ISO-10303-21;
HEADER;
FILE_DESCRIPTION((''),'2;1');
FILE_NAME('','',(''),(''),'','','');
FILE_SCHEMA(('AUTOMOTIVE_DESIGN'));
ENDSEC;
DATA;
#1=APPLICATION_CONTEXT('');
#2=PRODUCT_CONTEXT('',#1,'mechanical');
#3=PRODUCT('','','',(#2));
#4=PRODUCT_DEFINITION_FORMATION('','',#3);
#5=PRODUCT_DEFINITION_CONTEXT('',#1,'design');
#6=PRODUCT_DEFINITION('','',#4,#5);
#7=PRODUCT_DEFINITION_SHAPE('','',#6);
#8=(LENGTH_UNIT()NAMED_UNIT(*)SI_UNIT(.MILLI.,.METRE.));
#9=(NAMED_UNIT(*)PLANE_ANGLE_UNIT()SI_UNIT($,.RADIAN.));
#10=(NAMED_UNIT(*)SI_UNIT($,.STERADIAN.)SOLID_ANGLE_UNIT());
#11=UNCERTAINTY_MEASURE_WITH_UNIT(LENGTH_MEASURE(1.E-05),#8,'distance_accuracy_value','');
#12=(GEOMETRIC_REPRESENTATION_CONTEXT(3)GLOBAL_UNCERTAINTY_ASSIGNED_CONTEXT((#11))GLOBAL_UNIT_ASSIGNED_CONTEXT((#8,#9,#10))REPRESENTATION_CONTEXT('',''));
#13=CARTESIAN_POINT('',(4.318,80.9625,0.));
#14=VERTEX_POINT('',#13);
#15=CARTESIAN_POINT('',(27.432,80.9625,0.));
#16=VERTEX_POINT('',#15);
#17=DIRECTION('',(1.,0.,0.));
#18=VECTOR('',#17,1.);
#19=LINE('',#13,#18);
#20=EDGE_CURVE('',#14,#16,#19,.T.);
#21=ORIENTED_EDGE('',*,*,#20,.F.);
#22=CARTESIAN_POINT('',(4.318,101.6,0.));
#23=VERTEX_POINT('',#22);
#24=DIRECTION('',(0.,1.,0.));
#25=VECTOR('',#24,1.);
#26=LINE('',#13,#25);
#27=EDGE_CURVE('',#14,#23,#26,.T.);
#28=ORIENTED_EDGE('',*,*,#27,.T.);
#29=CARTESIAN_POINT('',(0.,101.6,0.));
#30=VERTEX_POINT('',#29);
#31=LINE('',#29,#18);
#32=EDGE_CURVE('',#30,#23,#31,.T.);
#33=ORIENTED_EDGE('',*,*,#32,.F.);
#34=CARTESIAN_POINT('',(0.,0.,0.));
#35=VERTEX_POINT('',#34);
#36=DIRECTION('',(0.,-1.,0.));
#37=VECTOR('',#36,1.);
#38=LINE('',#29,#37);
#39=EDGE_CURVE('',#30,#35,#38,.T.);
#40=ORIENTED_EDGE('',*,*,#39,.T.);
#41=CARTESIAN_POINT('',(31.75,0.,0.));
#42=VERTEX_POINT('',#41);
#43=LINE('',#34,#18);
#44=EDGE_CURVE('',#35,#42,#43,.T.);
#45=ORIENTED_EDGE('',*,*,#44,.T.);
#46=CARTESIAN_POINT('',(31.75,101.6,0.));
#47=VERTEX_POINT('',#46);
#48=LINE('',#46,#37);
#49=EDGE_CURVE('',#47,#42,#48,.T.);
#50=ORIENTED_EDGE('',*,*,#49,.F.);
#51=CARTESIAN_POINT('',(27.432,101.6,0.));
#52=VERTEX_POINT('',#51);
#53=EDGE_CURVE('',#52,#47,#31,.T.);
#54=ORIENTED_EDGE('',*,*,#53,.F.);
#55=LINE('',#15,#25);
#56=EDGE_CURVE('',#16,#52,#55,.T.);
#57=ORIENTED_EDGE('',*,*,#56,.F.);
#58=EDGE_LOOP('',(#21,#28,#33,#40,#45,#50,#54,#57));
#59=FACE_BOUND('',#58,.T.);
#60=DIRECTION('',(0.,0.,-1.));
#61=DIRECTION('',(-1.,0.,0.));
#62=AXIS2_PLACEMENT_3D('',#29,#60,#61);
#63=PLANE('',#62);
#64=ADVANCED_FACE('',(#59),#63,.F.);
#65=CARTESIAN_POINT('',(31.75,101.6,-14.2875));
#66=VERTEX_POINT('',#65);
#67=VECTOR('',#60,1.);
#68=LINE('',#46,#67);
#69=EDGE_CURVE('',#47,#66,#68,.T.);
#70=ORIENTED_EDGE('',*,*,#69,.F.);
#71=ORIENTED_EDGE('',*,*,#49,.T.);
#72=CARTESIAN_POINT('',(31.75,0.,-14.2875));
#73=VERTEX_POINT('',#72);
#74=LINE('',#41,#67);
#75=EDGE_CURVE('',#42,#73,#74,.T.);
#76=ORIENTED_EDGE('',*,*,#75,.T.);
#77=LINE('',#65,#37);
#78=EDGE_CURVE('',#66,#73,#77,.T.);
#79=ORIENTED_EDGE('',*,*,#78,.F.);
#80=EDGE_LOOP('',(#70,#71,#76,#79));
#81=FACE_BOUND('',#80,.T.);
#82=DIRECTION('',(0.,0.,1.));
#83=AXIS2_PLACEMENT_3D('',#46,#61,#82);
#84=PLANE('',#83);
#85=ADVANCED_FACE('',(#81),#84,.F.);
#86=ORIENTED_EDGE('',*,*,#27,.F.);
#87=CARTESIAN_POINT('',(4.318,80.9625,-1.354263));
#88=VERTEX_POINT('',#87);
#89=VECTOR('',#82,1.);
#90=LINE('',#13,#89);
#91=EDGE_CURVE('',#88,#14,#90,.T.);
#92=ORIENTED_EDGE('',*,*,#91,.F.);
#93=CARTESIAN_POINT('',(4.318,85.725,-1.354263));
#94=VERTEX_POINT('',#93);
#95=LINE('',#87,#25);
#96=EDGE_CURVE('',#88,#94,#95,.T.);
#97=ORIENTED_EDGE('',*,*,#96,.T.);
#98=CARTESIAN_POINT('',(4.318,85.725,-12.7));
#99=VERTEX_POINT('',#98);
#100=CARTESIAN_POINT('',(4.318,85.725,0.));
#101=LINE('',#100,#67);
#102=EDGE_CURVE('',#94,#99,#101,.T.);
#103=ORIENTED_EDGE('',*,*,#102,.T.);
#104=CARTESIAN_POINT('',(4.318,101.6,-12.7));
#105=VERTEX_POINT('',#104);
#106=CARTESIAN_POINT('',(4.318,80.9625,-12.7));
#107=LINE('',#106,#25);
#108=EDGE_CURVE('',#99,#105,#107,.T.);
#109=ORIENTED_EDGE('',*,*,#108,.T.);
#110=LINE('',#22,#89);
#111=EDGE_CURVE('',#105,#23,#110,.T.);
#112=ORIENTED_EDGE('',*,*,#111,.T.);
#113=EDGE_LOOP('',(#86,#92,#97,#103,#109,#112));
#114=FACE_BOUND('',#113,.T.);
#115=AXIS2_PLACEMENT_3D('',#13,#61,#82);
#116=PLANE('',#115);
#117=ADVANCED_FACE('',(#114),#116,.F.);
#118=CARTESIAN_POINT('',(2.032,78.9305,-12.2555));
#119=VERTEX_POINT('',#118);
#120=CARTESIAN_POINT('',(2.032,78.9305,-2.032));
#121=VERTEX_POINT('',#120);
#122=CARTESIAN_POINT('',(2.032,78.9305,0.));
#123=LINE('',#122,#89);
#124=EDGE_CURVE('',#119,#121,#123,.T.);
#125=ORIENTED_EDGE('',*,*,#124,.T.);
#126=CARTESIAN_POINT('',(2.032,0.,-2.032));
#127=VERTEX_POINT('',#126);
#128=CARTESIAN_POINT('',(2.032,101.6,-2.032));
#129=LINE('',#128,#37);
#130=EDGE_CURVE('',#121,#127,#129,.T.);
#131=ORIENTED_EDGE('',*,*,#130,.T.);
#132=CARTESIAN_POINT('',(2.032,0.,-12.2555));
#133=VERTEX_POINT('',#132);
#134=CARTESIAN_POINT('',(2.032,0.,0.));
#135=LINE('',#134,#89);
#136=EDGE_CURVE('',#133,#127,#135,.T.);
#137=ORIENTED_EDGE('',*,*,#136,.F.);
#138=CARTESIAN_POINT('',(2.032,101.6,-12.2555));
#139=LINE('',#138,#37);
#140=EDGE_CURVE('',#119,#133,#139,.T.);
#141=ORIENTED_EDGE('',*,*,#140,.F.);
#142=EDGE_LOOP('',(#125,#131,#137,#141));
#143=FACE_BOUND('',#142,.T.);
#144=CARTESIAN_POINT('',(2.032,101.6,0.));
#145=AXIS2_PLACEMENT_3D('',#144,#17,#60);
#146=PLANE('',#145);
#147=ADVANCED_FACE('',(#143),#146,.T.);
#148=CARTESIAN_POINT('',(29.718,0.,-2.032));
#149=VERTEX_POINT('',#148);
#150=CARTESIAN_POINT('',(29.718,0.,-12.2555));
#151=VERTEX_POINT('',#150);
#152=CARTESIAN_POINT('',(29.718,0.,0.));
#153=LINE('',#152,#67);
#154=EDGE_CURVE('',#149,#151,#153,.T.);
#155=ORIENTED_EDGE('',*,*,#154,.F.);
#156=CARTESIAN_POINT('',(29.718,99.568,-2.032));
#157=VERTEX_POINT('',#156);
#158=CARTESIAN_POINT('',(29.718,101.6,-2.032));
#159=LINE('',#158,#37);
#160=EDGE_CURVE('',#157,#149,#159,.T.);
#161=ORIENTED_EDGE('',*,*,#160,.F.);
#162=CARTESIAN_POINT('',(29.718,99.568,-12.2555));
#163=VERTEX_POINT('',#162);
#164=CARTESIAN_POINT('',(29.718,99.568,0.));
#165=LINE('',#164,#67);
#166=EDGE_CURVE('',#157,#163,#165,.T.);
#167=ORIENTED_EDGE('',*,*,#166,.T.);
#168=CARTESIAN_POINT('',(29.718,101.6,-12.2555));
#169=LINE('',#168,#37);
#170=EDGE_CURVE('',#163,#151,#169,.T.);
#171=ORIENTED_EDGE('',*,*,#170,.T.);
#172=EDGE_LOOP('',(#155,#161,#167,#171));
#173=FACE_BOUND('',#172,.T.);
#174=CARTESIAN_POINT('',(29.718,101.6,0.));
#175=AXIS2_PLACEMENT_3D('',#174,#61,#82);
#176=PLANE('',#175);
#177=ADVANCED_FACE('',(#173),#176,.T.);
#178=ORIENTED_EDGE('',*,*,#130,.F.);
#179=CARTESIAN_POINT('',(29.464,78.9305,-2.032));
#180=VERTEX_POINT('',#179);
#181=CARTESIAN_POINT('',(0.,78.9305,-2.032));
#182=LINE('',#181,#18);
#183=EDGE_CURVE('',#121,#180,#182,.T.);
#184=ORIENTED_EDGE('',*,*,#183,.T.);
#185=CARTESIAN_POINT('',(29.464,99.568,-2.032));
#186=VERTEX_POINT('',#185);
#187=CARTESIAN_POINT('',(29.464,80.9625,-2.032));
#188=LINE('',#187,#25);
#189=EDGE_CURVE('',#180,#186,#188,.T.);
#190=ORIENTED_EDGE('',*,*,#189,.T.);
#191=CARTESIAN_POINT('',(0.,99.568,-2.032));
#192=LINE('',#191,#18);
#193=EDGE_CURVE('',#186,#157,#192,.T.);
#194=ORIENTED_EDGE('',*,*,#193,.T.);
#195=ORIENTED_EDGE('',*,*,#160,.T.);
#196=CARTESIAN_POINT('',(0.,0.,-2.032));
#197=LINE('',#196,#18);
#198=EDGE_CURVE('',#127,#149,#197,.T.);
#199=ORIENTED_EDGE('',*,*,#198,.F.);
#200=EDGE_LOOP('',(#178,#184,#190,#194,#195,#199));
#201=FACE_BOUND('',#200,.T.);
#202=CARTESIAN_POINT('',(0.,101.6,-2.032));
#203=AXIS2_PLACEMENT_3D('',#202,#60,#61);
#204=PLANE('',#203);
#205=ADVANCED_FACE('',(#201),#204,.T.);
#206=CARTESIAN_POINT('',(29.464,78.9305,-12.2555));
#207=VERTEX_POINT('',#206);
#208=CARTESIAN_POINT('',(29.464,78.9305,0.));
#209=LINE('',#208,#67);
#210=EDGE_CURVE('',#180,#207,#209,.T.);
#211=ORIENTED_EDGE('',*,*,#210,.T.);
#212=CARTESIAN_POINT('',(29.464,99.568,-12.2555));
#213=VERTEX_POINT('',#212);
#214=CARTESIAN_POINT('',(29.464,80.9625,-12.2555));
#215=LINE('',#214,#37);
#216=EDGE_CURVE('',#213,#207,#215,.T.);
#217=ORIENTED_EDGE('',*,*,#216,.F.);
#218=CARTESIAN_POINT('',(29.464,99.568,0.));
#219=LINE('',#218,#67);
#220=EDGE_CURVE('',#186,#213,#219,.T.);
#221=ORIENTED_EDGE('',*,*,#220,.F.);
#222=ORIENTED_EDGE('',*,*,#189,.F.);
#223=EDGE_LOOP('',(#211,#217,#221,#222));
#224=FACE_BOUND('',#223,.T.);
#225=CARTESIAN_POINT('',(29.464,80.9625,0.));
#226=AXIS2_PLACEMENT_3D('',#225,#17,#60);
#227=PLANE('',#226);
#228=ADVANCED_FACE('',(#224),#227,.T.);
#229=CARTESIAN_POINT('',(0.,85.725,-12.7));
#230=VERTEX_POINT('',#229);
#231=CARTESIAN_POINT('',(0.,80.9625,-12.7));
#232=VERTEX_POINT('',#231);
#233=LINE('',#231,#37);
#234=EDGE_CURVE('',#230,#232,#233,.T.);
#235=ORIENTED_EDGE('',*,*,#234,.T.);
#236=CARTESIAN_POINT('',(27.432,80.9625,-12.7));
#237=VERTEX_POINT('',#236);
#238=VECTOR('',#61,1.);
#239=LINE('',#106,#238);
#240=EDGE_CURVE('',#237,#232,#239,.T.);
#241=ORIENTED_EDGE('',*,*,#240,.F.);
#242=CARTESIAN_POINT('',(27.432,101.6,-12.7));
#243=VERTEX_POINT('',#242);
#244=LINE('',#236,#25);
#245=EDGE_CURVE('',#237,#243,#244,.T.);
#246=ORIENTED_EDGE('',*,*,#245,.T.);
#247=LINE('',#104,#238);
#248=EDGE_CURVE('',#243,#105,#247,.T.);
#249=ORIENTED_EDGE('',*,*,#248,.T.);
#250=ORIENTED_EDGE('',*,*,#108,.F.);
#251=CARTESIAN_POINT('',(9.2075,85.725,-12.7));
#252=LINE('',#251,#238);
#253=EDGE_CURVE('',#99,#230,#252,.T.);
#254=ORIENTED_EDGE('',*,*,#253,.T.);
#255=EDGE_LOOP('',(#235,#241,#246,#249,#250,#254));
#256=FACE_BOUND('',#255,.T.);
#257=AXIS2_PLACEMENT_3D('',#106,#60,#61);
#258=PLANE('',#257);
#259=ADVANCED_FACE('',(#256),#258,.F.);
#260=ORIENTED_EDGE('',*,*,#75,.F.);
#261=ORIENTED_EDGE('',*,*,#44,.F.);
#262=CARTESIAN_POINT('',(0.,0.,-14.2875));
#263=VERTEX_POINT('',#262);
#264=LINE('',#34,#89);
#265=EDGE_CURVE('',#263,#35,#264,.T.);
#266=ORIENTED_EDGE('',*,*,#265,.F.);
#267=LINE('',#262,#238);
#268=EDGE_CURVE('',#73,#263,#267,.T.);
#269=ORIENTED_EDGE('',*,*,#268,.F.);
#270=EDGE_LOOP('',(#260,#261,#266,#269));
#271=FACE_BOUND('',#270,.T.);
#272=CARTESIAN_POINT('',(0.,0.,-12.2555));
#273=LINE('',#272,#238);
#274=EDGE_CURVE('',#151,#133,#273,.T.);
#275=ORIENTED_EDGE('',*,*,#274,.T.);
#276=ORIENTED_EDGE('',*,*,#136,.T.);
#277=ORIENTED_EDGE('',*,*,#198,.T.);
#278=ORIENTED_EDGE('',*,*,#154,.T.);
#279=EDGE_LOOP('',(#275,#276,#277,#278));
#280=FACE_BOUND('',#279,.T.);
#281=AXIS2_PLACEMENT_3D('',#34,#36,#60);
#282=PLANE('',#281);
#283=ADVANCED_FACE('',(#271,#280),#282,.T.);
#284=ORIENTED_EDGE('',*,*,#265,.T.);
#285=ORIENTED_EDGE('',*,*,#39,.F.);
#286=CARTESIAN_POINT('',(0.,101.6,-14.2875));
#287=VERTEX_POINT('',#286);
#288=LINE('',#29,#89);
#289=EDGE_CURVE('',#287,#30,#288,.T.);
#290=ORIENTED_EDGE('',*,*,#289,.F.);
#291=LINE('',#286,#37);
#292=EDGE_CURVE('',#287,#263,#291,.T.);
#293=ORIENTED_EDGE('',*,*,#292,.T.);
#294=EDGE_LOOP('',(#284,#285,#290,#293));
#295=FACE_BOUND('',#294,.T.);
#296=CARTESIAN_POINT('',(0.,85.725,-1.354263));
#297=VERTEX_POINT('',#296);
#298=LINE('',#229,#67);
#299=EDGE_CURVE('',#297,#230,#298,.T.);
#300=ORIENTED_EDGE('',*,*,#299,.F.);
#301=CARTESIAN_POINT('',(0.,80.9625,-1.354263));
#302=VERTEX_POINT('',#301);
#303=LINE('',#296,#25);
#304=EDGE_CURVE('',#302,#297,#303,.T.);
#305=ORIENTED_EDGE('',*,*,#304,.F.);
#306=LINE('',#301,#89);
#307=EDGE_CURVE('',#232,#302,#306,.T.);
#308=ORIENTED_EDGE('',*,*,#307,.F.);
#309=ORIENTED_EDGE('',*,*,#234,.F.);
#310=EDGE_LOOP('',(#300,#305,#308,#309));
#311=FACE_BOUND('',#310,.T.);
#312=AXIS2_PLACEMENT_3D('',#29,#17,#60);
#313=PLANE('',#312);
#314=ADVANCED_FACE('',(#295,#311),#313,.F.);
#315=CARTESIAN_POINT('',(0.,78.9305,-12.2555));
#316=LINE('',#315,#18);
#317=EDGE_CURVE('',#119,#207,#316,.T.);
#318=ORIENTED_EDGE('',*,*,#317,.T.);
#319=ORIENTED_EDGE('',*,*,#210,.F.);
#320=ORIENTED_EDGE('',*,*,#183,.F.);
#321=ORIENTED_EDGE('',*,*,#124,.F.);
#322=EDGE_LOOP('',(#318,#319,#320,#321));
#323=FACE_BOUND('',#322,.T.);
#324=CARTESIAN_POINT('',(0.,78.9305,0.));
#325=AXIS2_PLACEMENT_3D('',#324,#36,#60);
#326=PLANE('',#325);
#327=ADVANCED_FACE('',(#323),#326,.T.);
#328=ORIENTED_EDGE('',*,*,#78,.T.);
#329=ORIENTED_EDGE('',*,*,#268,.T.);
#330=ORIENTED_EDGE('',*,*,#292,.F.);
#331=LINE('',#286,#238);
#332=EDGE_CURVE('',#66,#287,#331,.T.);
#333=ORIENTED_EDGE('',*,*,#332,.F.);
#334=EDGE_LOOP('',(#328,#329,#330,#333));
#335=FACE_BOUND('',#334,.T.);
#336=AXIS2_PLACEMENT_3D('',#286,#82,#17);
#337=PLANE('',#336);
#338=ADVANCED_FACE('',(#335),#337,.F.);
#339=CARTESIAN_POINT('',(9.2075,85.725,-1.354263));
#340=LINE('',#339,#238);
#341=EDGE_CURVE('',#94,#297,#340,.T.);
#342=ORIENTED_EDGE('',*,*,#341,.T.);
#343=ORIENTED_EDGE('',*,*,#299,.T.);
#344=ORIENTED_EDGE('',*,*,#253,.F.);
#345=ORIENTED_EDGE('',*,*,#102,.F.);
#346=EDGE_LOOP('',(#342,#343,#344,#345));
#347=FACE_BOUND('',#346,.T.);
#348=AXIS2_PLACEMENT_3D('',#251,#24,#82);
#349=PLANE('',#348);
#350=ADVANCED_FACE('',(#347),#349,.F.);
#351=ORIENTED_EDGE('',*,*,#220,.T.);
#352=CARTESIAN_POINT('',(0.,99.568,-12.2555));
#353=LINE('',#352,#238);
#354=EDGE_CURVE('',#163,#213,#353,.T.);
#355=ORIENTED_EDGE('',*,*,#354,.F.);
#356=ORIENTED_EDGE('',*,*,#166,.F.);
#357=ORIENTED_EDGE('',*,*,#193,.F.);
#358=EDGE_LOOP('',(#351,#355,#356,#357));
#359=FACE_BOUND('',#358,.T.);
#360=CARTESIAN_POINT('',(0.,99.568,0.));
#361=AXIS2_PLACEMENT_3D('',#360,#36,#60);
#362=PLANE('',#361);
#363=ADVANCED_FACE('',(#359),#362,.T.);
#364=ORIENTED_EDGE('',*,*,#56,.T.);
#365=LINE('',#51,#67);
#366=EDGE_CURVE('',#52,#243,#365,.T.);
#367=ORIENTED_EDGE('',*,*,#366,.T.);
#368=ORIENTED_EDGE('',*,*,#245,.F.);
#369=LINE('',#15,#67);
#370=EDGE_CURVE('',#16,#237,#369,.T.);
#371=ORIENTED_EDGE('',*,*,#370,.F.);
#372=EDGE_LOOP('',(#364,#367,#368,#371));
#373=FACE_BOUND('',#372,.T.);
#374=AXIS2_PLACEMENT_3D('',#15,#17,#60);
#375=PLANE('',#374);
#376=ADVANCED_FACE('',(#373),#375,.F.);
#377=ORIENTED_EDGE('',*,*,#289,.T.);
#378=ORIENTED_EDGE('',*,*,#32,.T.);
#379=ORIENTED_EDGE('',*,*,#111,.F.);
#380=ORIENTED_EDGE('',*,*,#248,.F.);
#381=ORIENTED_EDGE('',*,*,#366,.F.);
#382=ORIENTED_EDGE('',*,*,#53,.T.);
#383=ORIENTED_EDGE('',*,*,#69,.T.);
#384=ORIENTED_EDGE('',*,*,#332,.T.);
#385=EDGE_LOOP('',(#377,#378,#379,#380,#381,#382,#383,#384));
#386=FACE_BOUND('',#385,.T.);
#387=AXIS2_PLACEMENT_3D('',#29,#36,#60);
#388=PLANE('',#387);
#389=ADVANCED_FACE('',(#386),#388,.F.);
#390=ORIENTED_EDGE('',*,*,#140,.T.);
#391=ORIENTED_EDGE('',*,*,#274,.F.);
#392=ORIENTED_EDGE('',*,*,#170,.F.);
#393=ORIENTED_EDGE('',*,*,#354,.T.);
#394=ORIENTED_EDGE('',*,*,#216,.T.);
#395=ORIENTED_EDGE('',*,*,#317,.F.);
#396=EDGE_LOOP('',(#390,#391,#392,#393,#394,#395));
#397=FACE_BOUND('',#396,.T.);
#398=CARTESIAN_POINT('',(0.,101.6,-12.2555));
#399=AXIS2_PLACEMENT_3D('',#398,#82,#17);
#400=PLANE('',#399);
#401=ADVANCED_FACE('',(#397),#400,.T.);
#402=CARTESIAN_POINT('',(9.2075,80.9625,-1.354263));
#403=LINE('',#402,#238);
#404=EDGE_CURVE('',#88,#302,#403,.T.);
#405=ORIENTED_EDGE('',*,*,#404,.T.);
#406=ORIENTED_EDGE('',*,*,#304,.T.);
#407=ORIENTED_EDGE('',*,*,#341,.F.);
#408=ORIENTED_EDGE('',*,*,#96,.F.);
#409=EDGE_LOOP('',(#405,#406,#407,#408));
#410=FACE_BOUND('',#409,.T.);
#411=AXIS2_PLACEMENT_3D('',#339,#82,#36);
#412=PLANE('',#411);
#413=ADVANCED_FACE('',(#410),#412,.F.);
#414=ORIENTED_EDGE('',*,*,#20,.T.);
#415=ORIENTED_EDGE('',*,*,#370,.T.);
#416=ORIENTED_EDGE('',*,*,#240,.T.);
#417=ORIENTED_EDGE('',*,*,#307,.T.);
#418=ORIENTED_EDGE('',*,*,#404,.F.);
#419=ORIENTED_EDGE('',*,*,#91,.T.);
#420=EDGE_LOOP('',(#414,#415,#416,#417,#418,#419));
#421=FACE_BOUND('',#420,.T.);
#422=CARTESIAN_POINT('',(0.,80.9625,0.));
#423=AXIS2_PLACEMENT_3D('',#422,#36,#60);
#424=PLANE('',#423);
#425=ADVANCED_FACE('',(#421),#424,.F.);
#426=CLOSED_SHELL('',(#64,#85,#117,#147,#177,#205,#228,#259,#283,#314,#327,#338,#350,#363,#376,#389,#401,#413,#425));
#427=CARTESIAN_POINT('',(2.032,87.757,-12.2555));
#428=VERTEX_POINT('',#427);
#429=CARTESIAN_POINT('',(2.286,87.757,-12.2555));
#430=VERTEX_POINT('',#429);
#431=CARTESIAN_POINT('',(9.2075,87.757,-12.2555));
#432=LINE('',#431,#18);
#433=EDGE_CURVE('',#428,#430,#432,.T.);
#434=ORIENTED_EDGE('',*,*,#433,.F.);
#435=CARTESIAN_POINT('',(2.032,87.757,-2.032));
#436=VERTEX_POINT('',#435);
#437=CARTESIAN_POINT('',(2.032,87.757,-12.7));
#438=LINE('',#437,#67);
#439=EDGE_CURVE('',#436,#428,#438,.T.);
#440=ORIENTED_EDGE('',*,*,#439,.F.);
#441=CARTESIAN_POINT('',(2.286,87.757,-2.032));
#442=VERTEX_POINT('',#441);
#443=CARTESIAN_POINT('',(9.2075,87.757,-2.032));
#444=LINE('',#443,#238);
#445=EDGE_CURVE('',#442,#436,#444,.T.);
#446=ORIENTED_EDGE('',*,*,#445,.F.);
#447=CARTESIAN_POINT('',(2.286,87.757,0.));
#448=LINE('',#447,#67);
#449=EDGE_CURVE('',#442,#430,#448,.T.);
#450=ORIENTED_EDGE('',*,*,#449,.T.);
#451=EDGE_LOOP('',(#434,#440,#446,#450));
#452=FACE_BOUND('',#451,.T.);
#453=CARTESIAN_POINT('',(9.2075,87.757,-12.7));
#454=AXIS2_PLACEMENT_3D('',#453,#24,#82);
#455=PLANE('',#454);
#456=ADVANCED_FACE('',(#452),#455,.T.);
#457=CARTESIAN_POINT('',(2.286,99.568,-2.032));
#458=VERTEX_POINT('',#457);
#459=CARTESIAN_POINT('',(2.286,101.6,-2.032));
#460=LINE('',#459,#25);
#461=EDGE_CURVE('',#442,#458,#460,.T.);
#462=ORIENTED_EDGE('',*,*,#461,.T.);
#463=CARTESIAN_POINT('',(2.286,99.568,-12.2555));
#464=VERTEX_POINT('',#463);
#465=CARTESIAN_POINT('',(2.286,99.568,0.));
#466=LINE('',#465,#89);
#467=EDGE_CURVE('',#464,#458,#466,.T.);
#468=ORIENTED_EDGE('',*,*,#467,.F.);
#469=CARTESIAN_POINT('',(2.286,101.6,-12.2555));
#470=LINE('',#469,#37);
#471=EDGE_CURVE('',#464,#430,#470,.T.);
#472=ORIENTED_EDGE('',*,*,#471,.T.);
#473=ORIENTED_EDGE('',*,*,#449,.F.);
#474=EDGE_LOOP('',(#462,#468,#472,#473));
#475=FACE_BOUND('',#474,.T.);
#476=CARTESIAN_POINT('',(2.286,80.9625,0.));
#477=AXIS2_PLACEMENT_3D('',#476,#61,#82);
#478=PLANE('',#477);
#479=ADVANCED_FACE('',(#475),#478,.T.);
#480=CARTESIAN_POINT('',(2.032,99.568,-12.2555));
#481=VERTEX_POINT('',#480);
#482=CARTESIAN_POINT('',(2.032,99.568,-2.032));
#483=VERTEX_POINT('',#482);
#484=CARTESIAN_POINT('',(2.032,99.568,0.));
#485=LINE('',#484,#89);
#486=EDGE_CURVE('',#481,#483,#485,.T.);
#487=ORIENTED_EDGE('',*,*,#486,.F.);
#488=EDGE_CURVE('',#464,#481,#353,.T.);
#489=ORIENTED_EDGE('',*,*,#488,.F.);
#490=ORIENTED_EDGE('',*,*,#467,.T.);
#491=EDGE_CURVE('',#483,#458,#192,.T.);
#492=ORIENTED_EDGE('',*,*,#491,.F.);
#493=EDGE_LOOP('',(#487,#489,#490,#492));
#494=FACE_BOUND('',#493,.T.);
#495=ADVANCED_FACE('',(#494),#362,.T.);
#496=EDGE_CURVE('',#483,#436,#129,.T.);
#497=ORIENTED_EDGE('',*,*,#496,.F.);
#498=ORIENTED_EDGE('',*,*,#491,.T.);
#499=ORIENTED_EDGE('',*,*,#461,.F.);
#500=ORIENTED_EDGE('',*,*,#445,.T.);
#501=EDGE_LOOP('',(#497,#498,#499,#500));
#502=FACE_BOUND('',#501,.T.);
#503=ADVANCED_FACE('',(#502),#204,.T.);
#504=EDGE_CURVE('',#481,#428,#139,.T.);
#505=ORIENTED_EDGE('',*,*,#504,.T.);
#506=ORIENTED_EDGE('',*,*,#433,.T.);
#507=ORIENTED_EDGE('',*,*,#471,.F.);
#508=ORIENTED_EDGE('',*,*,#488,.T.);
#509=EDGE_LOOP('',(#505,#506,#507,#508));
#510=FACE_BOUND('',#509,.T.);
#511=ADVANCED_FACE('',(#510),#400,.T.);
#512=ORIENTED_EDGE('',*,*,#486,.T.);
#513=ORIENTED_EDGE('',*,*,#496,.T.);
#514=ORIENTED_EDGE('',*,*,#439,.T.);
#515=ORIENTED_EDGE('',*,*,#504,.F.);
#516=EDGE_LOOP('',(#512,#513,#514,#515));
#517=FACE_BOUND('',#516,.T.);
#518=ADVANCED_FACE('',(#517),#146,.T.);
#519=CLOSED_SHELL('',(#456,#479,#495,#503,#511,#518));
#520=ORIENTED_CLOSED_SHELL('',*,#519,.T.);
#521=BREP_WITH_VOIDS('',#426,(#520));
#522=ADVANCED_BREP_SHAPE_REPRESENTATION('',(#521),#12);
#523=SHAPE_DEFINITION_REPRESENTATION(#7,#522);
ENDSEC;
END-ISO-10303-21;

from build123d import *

# Parameters (mm, degrees)
SKETCH1_W           = 31.75
SKETCH1_H           = 14.2875
BOSS_EXTRUDE1_DEPTH = 101.6
SKETCH5_W           = 23.114
SKETCH5_H           = 12.7
CUT_EXTRUDE2_DEPTH  = 20.6375
SKETCH6_W           = 11.345737275
SKETCH6_H           = 4.7625
CUT_EXTRUDE4_DEPTH  = 9.2075
SHELL2_START        = -12.2555
SHELL2_OUTLINE_W    = 0.254
SHELL2_OUTLINE_H    = 11.811
SHELL2_DEPTH        = 10.2235


# Read off the part's stored shape, not the designer's step: Shell2
with BuildPart() as part:
    # Sketch1 → Boss-Extrude1 (new body)
    with BuildSketch(Plane(origin=(0, 0, 0), x_dir=(1, 0, 0), z_dir=(0, 1, 0))):
        with Locations((15.875, 7.14375)):
            Rectangle(SKETCH1_W, SKETCH1_H)
    extrude(amount=BOSS_EXTRUDE1_DEPTH)

    # Sketch5 → Cut-Extrude2 (cut)
    with BuildSketch(Plane(origin=(0, 101.6, 0), x_dir=(1, 0, 0), z_dir=(0, 1, 0))):
        with Locations((15.875, 6.35)):
            Rectangle(SKETCH5_W, SKETCH5_H)
    extrude(amount=-CUT_EXTRUDE2_DEPTH, mode=Mode.SUBTRACT)

    # Sketch6 → Cut-Extrude4 (cut)
    with BuildSketch(Plane.ZY):
        with Locations((-7.027131363, 83.34375)):
            Rectangle(SKETCH6_W, SKETCH6_H)
    extrude(amount=-CUT_EXTRUDE4_DEPTH, mode=Mode.SUBTRACT)

    # Shell2 outline → Shell2 (cut)
    with BuildSketch(Plane.XY.offset(SHELL2_START)):
        Polygon((2.032, 78.9305), (2.032, 0), (29.718, 0), (29.718, 99.568), (29.464, 99.568), (29.464, 78.9305), align=None)
        with Locations((2.159, 93.6625)):
            Rectangle(SHELL2_OUTLINE_W, SHELL2_OUTLINE_H)
    extrude(amount=SHELL2_DEPTH, mode=Mode.SUBTRACT)


solid = part.part
